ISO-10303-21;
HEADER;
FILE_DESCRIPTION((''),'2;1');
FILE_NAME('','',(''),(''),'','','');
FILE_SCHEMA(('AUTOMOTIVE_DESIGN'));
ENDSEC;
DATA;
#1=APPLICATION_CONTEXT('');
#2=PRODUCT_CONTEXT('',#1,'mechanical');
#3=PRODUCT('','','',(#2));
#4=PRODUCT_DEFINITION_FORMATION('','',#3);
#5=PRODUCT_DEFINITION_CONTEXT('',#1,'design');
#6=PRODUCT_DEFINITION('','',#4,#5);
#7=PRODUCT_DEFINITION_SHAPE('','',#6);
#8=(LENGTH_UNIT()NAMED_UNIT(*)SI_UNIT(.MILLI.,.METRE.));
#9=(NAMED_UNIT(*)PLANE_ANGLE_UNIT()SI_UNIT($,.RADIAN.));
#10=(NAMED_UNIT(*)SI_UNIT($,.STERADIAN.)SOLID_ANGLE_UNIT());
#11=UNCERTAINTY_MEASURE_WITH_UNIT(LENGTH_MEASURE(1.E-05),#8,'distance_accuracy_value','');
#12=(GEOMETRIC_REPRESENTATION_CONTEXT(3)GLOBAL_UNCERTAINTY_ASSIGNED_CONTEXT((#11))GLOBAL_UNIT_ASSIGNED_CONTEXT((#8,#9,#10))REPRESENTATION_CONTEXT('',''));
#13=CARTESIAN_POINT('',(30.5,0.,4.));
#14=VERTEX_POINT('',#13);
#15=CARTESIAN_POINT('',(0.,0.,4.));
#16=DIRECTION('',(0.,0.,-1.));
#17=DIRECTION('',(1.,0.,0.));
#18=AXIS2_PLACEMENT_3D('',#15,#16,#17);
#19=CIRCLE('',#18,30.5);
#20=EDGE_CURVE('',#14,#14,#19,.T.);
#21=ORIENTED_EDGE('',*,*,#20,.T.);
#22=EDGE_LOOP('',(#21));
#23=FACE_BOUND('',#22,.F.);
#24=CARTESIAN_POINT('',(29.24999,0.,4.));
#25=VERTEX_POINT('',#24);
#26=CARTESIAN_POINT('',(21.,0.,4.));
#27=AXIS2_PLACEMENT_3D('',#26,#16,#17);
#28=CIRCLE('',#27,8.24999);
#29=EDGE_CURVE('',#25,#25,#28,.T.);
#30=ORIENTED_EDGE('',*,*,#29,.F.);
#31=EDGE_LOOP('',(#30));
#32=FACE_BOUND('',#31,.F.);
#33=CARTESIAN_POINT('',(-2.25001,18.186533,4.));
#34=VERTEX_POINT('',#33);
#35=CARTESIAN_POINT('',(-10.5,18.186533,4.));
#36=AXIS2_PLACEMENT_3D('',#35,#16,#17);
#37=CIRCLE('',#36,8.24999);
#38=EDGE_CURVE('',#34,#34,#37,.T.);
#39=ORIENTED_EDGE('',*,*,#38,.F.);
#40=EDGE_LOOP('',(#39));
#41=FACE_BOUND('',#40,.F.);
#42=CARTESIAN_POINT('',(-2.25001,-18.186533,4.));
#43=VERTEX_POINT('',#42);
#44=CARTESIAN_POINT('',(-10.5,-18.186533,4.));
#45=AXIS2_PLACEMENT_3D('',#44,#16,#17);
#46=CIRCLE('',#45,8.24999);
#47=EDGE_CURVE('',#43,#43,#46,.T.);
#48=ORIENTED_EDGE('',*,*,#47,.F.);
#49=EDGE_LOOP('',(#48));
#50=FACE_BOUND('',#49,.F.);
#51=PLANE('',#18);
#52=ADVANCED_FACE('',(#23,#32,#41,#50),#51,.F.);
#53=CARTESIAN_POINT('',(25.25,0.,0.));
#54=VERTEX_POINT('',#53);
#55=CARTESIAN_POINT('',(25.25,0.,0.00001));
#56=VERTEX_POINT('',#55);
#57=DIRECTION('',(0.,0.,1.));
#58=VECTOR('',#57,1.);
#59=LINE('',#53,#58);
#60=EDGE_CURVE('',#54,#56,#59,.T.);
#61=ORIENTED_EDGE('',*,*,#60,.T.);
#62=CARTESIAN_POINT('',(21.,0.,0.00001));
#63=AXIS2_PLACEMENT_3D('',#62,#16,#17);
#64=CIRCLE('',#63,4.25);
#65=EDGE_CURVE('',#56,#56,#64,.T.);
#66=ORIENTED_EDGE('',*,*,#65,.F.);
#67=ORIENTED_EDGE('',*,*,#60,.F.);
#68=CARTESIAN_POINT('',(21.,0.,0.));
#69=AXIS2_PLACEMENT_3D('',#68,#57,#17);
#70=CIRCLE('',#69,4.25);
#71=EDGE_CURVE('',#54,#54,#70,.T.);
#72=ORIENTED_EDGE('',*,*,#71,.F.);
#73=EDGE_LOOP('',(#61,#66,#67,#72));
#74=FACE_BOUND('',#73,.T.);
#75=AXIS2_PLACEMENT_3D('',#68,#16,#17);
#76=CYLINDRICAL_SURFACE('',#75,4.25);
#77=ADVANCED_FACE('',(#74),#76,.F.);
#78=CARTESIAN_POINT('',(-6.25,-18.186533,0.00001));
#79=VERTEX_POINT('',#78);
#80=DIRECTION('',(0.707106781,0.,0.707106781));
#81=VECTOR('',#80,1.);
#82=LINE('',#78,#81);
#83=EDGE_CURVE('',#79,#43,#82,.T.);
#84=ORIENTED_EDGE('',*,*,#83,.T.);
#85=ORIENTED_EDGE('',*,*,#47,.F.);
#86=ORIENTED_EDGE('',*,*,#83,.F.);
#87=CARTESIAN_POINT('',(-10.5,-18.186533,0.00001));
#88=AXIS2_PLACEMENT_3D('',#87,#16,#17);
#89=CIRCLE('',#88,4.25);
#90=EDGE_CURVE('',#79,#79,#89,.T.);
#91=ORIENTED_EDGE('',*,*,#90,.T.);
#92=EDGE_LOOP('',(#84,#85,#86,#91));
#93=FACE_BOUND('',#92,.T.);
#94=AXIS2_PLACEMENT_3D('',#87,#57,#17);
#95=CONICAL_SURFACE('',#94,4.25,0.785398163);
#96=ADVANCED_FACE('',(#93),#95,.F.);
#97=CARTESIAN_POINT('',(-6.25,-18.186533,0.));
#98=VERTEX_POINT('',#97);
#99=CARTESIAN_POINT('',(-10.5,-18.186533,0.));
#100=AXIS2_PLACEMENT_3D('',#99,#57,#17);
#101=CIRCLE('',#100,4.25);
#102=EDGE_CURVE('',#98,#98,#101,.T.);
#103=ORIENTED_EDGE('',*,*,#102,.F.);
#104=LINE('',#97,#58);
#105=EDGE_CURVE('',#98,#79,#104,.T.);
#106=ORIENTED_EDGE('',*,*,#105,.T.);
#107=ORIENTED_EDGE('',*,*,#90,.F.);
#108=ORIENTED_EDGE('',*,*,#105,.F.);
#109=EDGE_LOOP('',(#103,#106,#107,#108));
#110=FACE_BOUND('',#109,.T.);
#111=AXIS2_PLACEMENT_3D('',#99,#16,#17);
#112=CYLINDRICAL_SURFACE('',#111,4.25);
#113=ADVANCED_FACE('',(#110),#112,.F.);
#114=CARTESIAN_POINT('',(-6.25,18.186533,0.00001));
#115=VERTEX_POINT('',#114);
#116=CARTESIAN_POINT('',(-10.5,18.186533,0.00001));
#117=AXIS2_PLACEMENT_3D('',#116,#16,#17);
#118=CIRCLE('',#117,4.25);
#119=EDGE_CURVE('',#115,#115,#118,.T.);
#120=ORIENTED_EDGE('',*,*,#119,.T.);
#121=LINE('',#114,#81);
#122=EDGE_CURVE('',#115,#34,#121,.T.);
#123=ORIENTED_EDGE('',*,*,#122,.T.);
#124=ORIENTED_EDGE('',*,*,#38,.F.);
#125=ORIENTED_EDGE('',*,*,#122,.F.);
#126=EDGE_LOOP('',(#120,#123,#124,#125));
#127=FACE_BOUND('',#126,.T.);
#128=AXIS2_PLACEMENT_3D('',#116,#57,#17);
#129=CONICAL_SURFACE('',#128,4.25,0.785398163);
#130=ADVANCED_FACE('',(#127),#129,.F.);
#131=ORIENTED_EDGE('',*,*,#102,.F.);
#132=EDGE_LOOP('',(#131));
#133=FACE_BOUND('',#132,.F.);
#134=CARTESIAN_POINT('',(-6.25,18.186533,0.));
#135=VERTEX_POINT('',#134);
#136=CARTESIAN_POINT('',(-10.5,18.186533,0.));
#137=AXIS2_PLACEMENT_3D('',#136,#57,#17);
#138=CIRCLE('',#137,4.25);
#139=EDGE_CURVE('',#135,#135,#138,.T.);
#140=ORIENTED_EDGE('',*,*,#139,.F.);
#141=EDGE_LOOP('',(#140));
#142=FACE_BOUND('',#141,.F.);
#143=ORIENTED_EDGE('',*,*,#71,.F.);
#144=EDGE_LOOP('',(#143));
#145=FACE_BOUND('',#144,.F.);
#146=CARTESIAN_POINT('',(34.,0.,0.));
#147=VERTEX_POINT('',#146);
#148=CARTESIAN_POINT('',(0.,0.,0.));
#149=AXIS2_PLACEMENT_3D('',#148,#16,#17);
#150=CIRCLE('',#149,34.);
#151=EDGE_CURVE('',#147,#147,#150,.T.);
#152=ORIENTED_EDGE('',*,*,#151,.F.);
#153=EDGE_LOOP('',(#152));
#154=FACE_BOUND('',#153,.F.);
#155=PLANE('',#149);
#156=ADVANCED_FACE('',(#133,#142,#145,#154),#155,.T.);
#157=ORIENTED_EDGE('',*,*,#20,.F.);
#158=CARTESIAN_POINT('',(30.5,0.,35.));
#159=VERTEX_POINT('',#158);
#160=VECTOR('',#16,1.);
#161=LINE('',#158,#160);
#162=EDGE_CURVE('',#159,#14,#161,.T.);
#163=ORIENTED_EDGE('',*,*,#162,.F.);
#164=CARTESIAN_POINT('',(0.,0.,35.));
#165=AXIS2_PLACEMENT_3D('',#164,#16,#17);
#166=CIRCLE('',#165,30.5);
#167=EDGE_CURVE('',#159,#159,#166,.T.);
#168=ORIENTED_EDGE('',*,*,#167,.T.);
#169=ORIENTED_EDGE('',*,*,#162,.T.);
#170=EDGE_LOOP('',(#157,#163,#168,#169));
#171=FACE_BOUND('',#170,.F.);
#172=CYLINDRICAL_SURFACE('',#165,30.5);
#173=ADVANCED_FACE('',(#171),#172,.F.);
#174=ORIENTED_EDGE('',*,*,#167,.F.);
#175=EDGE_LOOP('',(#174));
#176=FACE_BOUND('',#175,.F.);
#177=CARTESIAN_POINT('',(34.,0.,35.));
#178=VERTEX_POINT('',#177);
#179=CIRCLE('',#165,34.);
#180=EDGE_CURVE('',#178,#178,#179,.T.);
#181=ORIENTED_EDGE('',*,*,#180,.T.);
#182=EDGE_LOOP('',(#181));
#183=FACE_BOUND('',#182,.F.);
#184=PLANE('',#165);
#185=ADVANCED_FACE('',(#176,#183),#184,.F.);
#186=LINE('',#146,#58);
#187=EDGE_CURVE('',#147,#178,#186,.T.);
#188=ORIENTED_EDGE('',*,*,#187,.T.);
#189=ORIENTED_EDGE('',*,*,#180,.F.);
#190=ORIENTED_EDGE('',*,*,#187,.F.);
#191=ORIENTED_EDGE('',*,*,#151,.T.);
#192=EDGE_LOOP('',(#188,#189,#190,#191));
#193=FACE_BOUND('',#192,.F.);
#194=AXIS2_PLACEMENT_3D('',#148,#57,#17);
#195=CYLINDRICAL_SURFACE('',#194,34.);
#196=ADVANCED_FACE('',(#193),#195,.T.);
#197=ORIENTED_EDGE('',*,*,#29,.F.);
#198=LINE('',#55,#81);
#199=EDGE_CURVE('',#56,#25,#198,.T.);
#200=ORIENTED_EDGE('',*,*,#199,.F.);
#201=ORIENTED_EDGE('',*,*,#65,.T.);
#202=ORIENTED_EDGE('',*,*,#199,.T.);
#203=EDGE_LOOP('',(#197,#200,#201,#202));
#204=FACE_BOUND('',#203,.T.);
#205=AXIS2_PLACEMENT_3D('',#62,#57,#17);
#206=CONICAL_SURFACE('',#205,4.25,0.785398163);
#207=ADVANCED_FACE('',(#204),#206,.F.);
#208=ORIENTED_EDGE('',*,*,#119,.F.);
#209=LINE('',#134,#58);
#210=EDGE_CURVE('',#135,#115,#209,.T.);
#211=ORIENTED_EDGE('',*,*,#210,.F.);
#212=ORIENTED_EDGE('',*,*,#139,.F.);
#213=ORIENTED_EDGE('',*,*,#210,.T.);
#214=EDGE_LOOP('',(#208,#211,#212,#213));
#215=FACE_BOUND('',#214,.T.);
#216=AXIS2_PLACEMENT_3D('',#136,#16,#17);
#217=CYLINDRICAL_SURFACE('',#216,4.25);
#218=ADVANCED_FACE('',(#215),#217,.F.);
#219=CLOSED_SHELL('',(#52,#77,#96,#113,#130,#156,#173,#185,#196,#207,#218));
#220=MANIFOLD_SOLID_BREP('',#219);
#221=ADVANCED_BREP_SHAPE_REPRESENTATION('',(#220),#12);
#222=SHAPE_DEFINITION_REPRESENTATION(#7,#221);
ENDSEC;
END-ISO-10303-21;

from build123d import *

# Parameters (mm, degrees)
F1_R     = 4.25
F3_DEPTH = 25
F4_SIZE  = 3.99999


# Not quite as in the source:
# - a fillet or chamfer is up to 0.001 mm smaller than in the source, because OpenCascade refuses the exact size


with BuildPart() as f2:
    # F0 (on Front) → F2 (revolve)
    with BuildSketch(Plane.XZ):
        Polygon((0, 4), (0, 0), (34, 0), (34, 35), (30.5, 35), (30.5, 4), align=None)
    revolve(axis=Axis((0, 0, 2), (0, 0, -1)))

    # F1 (on Top) → F3 (cut)
    with BuildSketch(Plane.XY):
        with Locations((-10.5, -18.1865334795)):
            Circle(F1_R)
        with Locations((-10.5, 18.1865334795)):
            Circle(F1_R)
        with Locations((21, 0)):
            Circle(F1_R)
    extrude(amount=F3_DEPTH, mode=Mode.SUBTRACT)

    # F4 (size 4 in the source; OpenCascade refuses exactly that, so slightly less here)
    f4_edges = [f2.edges().sort_by_distance(p)[0] for p in [
        (16.75, 0, 4),
        (-14.75, 18.186533, 4),
        (-14.75, -18.186533, 4),
    ]]
    chamfer(f4_edges, length=F4_SIZE)


solid = f2.part
